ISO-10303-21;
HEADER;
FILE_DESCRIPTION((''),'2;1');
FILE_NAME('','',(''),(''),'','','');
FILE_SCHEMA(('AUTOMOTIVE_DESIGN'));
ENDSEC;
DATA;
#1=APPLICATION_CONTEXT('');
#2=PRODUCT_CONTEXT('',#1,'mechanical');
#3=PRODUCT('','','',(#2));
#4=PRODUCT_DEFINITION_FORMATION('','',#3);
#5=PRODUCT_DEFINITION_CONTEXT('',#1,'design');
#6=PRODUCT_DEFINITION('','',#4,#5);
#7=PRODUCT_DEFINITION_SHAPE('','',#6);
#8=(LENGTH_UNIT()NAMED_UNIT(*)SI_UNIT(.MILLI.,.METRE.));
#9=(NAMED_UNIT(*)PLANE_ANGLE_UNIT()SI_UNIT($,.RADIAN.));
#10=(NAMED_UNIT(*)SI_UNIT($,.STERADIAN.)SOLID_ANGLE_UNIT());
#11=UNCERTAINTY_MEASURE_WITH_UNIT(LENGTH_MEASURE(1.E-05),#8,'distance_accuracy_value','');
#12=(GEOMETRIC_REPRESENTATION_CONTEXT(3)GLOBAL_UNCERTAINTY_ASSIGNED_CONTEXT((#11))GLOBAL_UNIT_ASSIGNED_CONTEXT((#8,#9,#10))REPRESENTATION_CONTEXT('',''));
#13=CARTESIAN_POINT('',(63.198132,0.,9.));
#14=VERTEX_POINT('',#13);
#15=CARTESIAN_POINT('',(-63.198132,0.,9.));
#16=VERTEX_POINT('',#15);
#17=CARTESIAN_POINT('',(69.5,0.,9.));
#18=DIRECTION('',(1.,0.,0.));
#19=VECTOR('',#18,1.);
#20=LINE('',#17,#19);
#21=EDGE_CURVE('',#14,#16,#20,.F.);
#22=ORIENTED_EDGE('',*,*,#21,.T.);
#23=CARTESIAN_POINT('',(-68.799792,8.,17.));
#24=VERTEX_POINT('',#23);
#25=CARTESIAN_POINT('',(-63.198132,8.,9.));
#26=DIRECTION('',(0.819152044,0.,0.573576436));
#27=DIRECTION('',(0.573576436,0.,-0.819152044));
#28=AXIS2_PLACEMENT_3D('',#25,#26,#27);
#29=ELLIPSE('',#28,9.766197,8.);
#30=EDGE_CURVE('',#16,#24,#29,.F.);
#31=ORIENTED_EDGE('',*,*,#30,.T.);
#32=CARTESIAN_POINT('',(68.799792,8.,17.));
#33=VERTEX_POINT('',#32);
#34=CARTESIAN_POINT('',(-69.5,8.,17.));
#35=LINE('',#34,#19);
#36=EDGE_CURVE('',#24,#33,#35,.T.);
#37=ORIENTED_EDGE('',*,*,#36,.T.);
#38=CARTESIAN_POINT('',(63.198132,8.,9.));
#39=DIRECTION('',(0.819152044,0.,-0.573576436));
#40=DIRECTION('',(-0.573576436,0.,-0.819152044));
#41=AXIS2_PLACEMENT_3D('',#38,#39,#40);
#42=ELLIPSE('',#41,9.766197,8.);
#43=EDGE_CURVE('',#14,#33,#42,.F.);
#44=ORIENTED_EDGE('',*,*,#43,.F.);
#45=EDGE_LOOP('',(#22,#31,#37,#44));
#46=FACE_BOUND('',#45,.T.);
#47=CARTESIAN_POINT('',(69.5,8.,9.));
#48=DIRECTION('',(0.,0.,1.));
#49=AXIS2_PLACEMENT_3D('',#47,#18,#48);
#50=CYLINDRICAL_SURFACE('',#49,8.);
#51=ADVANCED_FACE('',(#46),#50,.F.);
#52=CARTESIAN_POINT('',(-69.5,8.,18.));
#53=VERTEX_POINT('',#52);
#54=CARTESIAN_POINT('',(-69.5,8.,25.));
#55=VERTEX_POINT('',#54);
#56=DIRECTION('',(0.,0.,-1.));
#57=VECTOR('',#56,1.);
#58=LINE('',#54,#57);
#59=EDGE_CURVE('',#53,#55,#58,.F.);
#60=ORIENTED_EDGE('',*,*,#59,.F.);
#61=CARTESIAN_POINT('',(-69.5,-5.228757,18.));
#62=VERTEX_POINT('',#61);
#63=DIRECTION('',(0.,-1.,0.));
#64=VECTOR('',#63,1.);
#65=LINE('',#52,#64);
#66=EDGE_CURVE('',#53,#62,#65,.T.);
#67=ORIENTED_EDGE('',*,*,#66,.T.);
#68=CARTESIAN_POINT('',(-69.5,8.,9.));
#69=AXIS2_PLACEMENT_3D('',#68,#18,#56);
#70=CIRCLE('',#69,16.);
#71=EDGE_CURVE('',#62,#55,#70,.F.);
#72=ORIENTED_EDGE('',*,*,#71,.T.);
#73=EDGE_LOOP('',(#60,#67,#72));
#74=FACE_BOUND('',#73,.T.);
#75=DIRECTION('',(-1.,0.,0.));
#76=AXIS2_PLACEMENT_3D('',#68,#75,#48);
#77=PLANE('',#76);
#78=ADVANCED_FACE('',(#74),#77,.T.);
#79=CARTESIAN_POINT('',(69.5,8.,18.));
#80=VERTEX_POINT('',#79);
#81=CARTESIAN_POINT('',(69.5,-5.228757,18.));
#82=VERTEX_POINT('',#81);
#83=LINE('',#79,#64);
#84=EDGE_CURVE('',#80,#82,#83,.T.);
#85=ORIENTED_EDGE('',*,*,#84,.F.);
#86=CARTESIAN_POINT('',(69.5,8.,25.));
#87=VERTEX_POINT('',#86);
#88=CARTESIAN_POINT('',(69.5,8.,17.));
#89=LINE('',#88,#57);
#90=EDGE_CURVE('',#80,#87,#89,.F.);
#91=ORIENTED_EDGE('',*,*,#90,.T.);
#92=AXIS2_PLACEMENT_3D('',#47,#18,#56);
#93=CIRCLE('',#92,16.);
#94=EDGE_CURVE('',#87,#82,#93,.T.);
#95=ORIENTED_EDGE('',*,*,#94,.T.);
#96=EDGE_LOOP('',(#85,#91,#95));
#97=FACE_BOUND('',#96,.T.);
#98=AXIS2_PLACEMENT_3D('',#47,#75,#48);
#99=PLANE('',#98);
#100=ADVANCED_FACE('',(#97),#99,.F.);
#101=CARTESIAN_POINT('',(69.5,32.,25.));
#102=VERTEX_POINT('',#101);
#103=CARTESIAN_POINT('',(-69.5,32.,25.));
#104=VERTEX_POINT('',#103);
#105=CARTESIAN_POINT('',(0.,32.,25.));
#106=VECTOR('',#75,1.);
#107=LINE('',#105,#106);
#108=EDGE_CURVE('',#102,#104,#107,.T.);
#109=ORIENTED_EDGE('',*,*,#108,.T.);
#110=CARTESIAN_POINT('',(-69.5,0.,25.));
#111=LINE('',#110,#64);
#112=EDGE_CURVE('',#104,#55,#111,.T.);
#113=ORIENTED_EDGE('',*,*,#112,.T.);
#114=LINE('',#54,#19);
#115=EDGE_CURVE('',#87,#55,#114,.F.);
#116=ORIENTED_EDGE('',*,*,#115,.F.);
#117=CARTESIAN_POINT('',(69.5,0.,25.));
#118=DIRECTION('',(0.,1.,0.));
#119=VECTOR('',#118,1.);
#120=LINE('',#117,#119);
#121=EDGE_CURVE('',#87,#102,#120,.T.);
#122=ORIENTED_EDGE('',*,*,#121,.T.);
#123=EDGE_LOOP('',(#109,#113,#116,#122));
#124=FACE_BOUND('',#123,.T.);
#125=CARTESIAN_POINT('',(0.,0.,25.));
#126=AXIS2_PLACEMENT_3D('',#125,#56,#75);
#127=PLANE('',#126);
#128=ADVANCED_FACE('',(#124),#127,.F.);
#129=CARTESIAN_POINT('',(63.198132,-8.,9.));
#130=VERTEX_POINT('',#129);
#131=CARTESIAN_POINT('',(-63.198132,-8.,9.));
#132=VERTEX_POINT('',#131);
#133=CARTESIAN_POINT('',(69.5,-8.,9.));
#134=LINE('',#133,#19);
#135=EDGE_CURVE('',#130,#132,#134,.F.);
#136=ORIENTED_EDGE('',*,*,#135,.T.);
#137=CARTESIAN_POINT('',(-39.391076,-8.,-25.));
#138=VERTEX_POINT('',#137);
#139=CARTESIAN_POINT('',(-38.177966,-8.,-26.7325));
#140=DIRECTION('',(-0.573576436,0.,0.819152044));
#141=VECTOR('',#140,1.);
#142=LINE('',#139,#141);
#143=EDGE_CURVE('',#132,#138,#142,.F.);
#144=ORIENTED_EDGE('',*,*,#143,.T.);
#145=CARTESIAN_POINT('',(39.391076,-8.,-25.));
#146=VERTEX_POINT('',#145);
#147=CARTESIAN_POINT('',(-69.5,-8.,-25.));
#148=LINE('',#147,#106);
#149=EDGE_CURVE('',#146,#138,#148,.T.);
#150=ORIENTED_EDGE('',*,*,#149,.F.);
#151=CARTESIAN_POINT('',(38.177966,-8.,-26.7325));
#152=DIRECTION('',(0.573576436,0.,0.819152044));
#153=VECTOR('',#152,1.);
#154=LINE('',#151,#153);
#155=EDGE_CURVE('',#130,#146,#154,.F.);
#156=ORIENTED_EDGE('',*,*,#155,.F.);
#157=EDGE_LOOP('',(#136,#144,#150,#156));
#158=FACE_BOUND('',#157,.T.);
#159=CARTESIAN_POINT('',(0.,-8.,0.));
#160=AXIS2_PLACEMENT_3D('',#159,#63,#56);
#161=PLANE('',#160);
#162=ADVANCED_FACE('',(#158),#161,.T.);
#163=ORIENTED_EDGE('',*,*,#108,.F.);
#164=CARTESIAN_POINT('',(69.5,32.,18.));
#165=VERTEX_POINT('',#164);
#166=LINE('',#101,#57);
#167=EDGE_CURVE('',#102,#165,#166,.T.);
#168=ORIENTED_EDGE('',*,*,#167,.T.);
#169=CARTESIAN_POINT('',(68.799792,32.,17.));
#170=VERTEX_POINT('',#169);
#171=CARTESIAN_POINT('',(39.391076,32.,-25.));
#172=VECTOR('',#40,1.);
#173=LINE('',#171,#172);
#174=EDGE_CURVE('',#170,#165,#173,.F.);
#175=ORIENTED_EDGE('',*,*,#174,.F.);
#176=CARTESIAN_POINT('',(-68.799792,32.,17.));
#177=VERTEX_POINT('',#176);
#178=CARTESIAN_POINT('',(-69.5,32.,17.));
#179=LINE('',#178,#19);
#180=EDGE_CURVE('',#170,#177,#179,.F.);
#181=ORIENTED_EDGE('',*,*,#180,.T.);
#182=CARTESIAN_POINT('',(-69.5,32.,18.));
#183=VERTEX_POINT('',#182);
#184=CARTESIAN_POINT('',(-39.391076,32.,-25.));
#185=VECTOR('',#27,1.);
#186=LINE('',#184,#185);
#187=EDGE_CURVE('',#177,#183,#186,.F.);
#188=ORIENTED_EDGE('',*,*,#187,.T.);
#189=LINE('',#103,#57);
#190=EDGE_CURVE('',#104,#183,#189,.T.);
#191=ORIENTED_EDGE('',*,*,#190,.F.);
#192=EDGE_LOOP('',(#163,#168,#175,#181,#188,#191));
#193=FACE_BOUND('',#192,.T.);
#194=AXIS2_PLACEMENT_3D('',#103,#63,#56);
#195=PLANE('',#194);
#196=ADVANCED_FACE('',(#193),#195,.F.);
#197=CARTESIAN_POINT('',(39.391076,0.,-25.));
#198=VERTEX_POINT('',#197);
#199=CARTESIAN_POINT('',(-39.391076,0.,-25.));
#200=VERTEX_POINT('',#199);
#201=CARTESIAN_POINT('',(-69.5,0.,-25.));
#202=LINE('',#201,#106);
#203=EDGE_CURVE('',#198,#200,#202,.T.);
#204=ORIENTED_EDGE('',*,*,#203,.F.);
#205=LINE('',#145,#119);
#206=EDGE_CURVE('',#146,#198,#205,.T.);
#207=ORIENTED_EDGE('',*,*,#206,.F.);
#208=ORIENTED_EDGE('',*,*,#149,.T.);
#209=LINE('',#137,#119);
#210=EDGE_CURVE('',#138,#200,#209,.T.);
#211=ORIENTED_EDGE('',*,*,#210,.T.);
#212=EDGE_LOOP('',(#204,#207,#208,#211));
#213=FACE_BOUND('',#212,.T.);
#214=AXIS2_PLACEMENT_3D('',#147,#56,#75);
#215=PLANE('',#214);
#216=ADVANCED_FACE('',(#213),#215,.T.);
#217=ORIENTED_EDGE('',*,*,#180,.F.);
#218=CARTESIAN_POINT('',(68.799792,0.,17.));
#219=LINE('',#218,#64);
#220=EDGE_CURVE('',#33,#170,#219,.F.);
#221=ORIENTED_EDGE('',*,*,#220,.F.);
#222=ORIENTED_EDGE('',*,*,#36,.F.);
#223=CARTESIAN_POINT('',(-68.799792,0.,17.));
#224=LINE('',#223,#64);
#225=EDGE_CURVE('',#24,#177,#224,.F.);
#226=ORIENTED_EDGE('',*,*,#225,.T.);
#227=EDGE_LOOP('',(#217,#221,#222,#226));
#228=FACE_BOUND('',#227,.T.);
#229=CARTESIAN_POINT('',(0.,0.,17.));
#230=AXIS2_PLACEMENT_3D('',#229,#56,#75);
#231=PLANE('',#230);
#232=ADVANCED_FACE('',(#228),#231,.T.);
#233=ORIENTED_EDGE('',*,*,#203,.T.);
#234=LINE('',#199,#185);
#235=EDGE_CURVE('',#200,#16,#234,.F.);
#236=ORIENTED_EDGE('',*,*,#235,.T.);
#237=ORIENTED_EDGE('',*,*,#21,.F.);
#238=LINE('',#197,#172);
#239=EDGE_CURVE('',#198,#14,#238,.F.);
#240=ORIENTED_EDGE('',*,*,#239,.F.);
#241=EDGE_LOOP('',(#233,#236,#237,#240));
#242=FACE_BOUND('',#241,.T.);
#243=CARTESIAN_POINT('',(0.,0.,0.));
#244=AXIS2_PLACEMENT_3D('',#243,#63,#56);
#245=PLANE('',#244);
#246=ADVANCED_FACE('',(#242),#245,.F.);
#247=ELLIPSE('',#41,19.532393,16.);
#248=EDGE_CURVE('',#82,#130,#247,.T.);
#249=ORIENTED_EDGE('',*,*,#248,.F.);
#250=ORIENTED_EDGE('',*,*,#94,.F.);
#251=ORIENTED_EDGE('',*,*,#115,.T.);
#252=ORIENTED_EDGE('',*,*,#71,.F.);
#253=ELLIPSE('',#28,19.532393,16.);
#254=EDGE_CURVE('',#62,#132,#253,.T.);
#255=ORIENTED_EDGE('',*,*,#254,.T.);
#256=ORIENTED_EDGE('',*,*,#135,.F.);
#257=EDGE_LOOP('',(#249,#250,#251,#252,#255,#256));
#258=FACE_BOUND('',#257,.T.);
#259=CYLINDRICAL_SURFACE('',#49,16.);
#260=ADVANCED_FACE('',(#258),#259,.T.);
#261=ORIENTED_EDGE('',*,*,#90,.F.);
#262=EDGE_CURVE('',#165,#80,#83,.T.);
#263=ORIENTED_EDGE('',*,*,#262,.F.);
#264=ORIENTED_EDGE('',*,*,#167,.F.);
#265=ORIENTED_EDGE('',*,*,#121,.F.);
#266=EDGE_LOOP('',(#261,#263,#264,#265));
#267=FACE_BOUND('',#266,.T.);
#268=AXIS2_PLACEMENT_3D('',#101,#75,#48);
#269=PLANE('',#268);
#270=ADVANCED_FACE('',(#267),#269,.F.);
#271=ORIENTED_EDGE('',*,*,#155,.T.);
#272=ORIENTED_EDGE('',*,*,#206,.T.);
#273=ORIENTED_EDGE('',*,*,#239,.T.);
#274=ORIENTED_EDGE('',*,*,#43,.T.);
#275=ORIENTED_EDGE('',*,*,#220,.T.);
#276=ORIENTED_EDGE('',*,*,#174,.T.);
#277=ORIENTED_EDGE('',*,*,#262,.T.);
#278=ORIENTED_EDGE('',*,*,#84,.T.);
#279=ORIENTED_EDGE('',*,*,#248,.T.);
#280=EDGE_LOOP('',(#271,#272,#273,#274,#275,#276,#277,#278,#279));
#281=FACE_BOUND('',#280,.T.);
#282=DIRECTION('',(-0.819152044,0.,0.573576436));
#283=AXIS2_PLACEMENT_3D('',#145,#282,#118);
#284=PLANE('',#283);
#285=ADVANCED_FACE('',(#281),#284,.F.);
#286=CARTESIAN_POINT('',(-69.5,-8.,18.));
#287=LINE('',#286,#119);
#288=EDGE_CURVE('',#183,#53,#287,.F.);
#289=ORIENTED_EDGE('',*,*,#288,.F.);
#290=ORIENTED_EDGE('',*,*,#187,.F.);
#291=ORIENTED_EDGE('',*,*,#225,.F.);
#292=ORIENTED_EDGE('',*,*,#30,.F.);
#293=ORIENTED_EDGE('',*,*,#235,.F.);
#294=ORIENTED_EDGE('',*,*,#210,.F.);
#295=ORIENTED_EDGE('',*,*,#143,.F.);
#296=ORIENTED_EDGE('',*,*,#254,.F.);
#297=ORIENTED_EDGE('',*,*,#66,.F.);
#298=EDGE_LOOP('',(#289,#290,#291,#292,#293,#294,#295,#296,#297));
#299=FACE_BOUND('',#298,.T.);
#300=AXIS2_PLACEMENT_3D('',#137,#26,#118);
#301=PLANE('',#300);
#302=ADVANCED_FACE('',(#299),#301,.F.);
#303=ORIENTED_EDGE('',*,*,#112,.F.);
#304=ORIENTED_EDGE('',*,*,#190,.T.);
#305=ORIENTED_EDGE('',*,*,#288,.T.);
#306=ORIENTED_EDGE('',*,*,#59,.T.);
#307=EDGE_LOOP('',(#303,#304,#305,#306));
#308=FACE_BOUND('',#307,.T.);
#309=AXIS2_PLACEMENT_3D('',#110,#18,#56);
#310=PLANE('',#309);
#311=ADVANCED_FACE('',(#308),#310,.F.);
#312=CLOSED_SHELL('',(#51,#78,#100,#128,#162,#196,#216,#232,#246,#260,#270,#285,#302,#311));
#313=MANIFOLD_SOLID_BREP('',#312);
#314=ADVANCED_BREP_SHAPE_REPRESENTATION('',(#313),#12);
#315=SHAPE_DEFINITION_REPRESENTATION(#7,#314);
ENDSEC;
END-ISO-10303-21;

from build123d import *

# Parameters (mm, degrees)
SKETCH1_W                    = 139
SKETCH1_H                    = 50
BASE_FLANGE1_DEPTH           = 8
EDGE_FLANGE1_STRIP_W         = 48
EDGE_FLANGE1_STRIP_H         = 8
EDGE_FLANGE1_STRIP_CUT_DEPTH = 139
EDGE_FLANGE1_DEPTH           = 139
CHAMFER1_SIZE                = 43
CHAMFER1_SIZE2               = 30.108924143
MIRROR3_START                = 46.606691224
MIRROR3_OUTLINE_W            = 55
MIRROR3_OUTLINE_H            = 41
MIRROR3_DEPTH                = 24.663786763


# Read off the part's stored shape, not the designer's step: Mirror3
# Sheet-metal steps are written as plain solids
with BuildPart() as part:
    # Sketch1 → Base-Flange1 (new body)
    with BuildSketch(Plane(origin=(0, 0, 0), x_dir=(1, 0, 0), z_dir=(0, 1, 0))):
        Rectangle(SKETCH1_W, SKETCH1_H)
    extrude(amount=-BASE_FLANGE1_DEPTH)

    # Edge-Flange1 strip (across the edge) → Edge-Flange1 strip cut (cut)
    with BuildSketch(Plane(origin=(-69.5, 0, 25), x_dir=(0, 0, -1), z_dir=(1, 0, 0))):
        with Locations((-8, -4)):
            Rectangle(EDGE_FLANGE1_STRIP_W, EDGE_FLANGE1_STRIP_H)
    extrude(amount=EDGE_FLANGE1_STRIP_CUT_DEPTH, mode=Mode.SUBTRACT)

    # Edge-Flange1 section (across the edge) → Edge-Flange1 (add)
    with BuildSketch(Plane(origin=(-69.5, 0, 25), x_dir=(0, 0, -1), z_dir=(1, 0, 0))):
        with BuildLine():
            Line((0, 8), (0, 32))
            Line((0, 32), (8, 32))
            Line((8, 32), (8, 8))
            ThreePointArc((8, 8), (10.343145751, 2.343145751), (16, 0))
            Line((16, 0), (16, -8))
            ThreePointArc((16, -8), (4.686291501, -3.313708499), (0, 8))
        make_face()
    extrude(amount=EDGE_FLANGE1_DEPTH)

    # Chamfer1
    chamfer1_edges = [part.edges().sort_by_distance(p)[0] for p in [
        (-69.5, -4, -25),
    ]]
    chamfer1_side = [part.faces().sort_by_distance(p)[0] for p in [
        (-69.5, -0.640312424, -8),
    ]]
    chamfer(chamfer1_edges, length=CHAMFER1_SIZE, length2=CHAMFER1_SIZE2, reference=chamfer1_side[0])

    # Mirror3 outline → Mirror3 (cut)
    with BuildSketch(Plane(origin=(0, 0, 0), x_dir=(0.5735764363510512, 0, 0.8191520442889882), z_dir=(0.8191520442889882, 0, -0.5735764363510512)).offset(MIRROR3_START)):
        with Locations((28.5, -12.5)):
            Rectangle(MIRROR3_OUTLINE_W, MIRROR3_OUTLINE_H)
    extrude(amount=MIRROR3_DEPTH, mode=Mode.SUBTRACT)


solid = part.part
